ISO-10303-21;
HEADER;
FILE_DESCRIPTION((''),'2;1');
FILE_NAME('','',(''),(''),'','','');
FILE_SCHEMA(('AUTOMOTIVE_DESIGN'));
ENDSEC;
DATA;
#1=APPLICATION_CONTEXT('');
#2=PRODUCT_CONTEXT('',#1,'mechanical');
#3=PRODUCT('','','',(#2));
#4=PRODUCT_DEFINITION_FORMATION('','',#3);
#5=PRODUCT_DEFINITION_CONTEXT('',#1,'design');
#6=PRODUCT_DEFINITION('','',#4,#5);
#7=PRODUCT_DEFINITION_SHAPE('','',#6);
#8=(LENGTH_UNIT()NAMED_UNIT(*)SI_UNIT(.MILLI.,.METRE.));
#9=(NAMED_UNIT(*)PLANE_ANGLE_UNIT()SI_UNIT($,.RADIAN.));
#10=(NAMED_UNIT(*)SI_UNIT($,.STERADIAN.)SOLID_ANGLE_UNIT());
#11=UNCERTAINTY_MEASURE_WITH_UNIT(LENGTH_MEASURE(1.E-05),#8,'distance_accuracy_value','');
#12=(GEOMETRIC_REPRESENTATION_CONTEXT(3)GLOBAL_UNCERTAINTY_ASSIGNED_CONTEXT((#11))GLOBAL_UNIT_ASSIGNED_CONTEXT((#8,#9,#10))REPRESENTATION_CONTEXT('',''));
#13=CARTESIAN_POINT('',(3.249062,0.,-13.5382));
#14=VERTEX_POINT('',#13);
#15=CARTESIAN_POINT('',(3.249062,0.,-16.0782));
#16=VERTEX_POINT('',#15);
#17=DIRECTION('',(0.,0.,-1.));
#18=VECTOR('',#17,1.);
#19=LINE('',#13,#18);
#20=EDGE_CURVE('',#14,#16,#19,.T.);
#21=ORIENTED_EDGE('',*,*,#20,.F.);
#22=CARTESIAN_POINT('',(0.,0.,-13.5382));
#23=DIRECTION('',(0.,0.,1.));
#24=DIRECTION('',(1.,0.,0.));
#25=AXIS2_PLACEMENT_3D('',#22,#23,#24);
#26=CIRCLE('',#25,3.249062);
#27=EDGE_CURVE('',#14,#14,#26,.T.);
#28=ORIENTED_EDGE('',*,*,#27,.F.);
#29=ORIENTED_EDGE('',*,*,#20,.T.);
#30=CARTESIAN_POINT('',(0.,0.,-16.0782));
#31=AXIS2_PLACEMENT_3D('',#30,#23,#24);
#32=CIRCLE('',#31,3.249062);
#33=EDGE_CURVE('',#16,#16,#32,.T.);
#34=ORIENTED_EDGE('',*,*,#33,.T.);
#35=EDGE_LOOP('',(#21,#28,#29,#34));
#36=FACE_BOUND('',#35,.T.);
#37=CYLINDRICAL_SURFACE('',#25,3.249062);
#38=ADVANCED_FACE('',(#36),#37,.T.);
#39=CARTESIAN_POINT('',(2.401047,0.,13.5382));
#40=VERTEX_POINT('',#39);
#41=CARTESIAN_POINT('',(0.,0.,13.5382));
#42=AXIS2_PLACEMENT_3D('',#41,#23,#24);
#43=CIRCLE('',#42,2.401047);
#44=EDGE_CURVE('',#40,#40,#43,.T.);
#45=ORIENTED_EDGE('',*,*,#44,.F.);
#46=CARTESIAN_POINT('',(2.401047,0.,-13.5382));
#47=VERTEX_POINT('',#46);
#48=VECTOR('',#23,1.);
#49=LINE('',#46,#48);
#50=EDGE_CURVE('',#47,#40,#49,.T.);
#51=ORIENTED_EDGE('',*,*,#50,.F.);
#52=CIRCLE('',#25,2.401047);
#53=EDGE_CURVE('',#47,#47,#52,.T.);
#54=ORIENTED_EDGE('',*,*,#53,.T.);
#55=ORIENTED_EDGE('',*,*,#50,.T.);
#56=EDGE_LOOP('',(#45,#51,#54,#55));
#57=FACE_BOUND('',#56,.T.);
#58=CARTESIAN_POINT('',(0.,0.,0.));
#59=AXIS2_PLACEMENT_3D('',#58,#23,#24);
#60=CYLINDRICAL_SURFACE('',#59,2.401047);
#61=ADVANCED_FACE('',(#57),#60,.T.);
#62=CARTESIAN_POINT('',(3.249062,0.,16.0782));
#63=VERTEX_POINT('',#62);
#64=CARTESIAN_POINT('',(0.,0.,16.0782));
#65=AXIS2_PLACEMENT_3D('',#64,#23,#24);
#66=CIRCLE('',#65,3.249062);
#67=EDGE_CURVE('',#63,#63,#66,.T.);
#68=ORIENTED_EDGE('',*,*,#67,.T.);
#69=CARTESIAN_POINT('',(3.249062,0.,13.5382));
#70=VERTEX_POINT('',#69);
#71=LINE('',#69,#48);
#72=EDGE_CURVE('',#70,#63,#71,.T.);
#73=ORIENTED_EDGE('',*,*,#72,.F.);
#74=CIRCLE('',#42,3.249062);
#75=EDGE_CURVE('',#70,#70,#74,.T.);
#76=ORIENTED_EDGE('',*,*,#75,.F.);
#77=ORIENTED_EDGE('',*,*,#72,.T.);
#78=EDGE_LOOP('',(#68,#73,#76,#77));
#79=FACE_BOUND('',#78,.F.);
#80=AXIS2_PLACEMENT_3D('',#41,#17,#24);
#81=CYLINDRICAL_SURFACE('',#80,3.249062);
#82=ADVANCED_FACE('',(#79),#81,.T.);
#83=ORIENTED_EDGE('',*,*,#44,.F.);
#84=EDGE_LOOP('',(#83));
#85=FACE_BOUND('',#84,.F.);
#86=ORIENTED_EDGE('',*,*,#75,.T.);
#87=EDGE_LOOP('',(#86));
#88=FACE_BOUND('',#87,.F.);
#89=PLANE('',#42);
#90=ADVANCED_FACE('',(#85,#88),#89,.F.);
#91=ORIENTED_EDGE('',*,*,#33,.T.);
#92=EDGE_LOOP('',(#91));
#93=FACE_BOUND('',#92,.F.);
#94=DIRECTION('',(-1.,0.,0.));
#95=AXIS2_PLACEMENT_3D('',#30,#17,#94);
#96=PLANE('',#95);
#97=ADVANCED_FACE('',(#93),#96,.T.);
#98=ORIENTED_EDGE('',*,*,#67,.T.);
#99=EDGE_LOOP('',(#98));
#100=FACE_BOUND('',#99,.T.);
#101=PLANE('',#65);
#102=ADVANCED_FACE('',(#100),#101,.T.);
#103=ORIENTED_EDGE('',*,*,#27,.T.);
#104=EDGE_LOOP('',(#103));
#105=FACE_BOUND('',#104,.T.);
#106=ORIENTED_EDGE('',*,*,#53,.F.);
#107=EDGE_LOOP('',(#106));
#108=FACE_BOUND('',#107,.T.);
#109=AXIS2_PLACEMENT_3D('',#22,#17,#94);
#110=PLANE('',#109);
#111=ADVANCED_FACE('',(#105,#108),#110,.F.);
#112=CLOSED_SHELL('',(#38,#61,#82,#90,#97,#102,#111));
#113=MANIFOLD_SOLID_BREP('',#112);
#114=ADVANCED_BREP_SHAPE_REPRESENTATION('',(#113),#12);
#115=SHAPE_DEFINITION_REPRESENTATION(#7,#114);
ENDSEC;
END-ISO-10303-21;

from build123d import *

# Parameters (mm, degrees)
F0_R          = 2.4010472057
F1_DEPTH      = 13.5382
F1_DEPTH_BACK = 13.5382
F2_R          = 3.2490620178
F3_DEPTH      = 2.54


# Not quite as in the source:
# - a pattern or mirror of a feature is missing from the dataset's text; its kind, count and spacing are read off the source's solid


with BuildPart() as f1:
    # F0 (on Top) → F1 (new body, two sides)
    with BuildSketch(Plane.XY) as f1_sk:
        Circle(F0_R)
    extrude(amount=F1_DEPTH)
    extrude(f1_sk.sketch, amount=-F1_DEPTH_BACK)

    # F2 (on face) → F3 (join)
    with BuildSketch(Plane.XY.offset(13.5382)):
        Circle(F2_R)
    f3 = extrude(amount=F3_DEPTH)

    # F3_copies: F3 across plane
    add(f3.mirror(Plane(origin=(0, 0, 0), x_dir=(-1, 0, 0), z_dir=(0, 0, -1))))


solid = f1.part
